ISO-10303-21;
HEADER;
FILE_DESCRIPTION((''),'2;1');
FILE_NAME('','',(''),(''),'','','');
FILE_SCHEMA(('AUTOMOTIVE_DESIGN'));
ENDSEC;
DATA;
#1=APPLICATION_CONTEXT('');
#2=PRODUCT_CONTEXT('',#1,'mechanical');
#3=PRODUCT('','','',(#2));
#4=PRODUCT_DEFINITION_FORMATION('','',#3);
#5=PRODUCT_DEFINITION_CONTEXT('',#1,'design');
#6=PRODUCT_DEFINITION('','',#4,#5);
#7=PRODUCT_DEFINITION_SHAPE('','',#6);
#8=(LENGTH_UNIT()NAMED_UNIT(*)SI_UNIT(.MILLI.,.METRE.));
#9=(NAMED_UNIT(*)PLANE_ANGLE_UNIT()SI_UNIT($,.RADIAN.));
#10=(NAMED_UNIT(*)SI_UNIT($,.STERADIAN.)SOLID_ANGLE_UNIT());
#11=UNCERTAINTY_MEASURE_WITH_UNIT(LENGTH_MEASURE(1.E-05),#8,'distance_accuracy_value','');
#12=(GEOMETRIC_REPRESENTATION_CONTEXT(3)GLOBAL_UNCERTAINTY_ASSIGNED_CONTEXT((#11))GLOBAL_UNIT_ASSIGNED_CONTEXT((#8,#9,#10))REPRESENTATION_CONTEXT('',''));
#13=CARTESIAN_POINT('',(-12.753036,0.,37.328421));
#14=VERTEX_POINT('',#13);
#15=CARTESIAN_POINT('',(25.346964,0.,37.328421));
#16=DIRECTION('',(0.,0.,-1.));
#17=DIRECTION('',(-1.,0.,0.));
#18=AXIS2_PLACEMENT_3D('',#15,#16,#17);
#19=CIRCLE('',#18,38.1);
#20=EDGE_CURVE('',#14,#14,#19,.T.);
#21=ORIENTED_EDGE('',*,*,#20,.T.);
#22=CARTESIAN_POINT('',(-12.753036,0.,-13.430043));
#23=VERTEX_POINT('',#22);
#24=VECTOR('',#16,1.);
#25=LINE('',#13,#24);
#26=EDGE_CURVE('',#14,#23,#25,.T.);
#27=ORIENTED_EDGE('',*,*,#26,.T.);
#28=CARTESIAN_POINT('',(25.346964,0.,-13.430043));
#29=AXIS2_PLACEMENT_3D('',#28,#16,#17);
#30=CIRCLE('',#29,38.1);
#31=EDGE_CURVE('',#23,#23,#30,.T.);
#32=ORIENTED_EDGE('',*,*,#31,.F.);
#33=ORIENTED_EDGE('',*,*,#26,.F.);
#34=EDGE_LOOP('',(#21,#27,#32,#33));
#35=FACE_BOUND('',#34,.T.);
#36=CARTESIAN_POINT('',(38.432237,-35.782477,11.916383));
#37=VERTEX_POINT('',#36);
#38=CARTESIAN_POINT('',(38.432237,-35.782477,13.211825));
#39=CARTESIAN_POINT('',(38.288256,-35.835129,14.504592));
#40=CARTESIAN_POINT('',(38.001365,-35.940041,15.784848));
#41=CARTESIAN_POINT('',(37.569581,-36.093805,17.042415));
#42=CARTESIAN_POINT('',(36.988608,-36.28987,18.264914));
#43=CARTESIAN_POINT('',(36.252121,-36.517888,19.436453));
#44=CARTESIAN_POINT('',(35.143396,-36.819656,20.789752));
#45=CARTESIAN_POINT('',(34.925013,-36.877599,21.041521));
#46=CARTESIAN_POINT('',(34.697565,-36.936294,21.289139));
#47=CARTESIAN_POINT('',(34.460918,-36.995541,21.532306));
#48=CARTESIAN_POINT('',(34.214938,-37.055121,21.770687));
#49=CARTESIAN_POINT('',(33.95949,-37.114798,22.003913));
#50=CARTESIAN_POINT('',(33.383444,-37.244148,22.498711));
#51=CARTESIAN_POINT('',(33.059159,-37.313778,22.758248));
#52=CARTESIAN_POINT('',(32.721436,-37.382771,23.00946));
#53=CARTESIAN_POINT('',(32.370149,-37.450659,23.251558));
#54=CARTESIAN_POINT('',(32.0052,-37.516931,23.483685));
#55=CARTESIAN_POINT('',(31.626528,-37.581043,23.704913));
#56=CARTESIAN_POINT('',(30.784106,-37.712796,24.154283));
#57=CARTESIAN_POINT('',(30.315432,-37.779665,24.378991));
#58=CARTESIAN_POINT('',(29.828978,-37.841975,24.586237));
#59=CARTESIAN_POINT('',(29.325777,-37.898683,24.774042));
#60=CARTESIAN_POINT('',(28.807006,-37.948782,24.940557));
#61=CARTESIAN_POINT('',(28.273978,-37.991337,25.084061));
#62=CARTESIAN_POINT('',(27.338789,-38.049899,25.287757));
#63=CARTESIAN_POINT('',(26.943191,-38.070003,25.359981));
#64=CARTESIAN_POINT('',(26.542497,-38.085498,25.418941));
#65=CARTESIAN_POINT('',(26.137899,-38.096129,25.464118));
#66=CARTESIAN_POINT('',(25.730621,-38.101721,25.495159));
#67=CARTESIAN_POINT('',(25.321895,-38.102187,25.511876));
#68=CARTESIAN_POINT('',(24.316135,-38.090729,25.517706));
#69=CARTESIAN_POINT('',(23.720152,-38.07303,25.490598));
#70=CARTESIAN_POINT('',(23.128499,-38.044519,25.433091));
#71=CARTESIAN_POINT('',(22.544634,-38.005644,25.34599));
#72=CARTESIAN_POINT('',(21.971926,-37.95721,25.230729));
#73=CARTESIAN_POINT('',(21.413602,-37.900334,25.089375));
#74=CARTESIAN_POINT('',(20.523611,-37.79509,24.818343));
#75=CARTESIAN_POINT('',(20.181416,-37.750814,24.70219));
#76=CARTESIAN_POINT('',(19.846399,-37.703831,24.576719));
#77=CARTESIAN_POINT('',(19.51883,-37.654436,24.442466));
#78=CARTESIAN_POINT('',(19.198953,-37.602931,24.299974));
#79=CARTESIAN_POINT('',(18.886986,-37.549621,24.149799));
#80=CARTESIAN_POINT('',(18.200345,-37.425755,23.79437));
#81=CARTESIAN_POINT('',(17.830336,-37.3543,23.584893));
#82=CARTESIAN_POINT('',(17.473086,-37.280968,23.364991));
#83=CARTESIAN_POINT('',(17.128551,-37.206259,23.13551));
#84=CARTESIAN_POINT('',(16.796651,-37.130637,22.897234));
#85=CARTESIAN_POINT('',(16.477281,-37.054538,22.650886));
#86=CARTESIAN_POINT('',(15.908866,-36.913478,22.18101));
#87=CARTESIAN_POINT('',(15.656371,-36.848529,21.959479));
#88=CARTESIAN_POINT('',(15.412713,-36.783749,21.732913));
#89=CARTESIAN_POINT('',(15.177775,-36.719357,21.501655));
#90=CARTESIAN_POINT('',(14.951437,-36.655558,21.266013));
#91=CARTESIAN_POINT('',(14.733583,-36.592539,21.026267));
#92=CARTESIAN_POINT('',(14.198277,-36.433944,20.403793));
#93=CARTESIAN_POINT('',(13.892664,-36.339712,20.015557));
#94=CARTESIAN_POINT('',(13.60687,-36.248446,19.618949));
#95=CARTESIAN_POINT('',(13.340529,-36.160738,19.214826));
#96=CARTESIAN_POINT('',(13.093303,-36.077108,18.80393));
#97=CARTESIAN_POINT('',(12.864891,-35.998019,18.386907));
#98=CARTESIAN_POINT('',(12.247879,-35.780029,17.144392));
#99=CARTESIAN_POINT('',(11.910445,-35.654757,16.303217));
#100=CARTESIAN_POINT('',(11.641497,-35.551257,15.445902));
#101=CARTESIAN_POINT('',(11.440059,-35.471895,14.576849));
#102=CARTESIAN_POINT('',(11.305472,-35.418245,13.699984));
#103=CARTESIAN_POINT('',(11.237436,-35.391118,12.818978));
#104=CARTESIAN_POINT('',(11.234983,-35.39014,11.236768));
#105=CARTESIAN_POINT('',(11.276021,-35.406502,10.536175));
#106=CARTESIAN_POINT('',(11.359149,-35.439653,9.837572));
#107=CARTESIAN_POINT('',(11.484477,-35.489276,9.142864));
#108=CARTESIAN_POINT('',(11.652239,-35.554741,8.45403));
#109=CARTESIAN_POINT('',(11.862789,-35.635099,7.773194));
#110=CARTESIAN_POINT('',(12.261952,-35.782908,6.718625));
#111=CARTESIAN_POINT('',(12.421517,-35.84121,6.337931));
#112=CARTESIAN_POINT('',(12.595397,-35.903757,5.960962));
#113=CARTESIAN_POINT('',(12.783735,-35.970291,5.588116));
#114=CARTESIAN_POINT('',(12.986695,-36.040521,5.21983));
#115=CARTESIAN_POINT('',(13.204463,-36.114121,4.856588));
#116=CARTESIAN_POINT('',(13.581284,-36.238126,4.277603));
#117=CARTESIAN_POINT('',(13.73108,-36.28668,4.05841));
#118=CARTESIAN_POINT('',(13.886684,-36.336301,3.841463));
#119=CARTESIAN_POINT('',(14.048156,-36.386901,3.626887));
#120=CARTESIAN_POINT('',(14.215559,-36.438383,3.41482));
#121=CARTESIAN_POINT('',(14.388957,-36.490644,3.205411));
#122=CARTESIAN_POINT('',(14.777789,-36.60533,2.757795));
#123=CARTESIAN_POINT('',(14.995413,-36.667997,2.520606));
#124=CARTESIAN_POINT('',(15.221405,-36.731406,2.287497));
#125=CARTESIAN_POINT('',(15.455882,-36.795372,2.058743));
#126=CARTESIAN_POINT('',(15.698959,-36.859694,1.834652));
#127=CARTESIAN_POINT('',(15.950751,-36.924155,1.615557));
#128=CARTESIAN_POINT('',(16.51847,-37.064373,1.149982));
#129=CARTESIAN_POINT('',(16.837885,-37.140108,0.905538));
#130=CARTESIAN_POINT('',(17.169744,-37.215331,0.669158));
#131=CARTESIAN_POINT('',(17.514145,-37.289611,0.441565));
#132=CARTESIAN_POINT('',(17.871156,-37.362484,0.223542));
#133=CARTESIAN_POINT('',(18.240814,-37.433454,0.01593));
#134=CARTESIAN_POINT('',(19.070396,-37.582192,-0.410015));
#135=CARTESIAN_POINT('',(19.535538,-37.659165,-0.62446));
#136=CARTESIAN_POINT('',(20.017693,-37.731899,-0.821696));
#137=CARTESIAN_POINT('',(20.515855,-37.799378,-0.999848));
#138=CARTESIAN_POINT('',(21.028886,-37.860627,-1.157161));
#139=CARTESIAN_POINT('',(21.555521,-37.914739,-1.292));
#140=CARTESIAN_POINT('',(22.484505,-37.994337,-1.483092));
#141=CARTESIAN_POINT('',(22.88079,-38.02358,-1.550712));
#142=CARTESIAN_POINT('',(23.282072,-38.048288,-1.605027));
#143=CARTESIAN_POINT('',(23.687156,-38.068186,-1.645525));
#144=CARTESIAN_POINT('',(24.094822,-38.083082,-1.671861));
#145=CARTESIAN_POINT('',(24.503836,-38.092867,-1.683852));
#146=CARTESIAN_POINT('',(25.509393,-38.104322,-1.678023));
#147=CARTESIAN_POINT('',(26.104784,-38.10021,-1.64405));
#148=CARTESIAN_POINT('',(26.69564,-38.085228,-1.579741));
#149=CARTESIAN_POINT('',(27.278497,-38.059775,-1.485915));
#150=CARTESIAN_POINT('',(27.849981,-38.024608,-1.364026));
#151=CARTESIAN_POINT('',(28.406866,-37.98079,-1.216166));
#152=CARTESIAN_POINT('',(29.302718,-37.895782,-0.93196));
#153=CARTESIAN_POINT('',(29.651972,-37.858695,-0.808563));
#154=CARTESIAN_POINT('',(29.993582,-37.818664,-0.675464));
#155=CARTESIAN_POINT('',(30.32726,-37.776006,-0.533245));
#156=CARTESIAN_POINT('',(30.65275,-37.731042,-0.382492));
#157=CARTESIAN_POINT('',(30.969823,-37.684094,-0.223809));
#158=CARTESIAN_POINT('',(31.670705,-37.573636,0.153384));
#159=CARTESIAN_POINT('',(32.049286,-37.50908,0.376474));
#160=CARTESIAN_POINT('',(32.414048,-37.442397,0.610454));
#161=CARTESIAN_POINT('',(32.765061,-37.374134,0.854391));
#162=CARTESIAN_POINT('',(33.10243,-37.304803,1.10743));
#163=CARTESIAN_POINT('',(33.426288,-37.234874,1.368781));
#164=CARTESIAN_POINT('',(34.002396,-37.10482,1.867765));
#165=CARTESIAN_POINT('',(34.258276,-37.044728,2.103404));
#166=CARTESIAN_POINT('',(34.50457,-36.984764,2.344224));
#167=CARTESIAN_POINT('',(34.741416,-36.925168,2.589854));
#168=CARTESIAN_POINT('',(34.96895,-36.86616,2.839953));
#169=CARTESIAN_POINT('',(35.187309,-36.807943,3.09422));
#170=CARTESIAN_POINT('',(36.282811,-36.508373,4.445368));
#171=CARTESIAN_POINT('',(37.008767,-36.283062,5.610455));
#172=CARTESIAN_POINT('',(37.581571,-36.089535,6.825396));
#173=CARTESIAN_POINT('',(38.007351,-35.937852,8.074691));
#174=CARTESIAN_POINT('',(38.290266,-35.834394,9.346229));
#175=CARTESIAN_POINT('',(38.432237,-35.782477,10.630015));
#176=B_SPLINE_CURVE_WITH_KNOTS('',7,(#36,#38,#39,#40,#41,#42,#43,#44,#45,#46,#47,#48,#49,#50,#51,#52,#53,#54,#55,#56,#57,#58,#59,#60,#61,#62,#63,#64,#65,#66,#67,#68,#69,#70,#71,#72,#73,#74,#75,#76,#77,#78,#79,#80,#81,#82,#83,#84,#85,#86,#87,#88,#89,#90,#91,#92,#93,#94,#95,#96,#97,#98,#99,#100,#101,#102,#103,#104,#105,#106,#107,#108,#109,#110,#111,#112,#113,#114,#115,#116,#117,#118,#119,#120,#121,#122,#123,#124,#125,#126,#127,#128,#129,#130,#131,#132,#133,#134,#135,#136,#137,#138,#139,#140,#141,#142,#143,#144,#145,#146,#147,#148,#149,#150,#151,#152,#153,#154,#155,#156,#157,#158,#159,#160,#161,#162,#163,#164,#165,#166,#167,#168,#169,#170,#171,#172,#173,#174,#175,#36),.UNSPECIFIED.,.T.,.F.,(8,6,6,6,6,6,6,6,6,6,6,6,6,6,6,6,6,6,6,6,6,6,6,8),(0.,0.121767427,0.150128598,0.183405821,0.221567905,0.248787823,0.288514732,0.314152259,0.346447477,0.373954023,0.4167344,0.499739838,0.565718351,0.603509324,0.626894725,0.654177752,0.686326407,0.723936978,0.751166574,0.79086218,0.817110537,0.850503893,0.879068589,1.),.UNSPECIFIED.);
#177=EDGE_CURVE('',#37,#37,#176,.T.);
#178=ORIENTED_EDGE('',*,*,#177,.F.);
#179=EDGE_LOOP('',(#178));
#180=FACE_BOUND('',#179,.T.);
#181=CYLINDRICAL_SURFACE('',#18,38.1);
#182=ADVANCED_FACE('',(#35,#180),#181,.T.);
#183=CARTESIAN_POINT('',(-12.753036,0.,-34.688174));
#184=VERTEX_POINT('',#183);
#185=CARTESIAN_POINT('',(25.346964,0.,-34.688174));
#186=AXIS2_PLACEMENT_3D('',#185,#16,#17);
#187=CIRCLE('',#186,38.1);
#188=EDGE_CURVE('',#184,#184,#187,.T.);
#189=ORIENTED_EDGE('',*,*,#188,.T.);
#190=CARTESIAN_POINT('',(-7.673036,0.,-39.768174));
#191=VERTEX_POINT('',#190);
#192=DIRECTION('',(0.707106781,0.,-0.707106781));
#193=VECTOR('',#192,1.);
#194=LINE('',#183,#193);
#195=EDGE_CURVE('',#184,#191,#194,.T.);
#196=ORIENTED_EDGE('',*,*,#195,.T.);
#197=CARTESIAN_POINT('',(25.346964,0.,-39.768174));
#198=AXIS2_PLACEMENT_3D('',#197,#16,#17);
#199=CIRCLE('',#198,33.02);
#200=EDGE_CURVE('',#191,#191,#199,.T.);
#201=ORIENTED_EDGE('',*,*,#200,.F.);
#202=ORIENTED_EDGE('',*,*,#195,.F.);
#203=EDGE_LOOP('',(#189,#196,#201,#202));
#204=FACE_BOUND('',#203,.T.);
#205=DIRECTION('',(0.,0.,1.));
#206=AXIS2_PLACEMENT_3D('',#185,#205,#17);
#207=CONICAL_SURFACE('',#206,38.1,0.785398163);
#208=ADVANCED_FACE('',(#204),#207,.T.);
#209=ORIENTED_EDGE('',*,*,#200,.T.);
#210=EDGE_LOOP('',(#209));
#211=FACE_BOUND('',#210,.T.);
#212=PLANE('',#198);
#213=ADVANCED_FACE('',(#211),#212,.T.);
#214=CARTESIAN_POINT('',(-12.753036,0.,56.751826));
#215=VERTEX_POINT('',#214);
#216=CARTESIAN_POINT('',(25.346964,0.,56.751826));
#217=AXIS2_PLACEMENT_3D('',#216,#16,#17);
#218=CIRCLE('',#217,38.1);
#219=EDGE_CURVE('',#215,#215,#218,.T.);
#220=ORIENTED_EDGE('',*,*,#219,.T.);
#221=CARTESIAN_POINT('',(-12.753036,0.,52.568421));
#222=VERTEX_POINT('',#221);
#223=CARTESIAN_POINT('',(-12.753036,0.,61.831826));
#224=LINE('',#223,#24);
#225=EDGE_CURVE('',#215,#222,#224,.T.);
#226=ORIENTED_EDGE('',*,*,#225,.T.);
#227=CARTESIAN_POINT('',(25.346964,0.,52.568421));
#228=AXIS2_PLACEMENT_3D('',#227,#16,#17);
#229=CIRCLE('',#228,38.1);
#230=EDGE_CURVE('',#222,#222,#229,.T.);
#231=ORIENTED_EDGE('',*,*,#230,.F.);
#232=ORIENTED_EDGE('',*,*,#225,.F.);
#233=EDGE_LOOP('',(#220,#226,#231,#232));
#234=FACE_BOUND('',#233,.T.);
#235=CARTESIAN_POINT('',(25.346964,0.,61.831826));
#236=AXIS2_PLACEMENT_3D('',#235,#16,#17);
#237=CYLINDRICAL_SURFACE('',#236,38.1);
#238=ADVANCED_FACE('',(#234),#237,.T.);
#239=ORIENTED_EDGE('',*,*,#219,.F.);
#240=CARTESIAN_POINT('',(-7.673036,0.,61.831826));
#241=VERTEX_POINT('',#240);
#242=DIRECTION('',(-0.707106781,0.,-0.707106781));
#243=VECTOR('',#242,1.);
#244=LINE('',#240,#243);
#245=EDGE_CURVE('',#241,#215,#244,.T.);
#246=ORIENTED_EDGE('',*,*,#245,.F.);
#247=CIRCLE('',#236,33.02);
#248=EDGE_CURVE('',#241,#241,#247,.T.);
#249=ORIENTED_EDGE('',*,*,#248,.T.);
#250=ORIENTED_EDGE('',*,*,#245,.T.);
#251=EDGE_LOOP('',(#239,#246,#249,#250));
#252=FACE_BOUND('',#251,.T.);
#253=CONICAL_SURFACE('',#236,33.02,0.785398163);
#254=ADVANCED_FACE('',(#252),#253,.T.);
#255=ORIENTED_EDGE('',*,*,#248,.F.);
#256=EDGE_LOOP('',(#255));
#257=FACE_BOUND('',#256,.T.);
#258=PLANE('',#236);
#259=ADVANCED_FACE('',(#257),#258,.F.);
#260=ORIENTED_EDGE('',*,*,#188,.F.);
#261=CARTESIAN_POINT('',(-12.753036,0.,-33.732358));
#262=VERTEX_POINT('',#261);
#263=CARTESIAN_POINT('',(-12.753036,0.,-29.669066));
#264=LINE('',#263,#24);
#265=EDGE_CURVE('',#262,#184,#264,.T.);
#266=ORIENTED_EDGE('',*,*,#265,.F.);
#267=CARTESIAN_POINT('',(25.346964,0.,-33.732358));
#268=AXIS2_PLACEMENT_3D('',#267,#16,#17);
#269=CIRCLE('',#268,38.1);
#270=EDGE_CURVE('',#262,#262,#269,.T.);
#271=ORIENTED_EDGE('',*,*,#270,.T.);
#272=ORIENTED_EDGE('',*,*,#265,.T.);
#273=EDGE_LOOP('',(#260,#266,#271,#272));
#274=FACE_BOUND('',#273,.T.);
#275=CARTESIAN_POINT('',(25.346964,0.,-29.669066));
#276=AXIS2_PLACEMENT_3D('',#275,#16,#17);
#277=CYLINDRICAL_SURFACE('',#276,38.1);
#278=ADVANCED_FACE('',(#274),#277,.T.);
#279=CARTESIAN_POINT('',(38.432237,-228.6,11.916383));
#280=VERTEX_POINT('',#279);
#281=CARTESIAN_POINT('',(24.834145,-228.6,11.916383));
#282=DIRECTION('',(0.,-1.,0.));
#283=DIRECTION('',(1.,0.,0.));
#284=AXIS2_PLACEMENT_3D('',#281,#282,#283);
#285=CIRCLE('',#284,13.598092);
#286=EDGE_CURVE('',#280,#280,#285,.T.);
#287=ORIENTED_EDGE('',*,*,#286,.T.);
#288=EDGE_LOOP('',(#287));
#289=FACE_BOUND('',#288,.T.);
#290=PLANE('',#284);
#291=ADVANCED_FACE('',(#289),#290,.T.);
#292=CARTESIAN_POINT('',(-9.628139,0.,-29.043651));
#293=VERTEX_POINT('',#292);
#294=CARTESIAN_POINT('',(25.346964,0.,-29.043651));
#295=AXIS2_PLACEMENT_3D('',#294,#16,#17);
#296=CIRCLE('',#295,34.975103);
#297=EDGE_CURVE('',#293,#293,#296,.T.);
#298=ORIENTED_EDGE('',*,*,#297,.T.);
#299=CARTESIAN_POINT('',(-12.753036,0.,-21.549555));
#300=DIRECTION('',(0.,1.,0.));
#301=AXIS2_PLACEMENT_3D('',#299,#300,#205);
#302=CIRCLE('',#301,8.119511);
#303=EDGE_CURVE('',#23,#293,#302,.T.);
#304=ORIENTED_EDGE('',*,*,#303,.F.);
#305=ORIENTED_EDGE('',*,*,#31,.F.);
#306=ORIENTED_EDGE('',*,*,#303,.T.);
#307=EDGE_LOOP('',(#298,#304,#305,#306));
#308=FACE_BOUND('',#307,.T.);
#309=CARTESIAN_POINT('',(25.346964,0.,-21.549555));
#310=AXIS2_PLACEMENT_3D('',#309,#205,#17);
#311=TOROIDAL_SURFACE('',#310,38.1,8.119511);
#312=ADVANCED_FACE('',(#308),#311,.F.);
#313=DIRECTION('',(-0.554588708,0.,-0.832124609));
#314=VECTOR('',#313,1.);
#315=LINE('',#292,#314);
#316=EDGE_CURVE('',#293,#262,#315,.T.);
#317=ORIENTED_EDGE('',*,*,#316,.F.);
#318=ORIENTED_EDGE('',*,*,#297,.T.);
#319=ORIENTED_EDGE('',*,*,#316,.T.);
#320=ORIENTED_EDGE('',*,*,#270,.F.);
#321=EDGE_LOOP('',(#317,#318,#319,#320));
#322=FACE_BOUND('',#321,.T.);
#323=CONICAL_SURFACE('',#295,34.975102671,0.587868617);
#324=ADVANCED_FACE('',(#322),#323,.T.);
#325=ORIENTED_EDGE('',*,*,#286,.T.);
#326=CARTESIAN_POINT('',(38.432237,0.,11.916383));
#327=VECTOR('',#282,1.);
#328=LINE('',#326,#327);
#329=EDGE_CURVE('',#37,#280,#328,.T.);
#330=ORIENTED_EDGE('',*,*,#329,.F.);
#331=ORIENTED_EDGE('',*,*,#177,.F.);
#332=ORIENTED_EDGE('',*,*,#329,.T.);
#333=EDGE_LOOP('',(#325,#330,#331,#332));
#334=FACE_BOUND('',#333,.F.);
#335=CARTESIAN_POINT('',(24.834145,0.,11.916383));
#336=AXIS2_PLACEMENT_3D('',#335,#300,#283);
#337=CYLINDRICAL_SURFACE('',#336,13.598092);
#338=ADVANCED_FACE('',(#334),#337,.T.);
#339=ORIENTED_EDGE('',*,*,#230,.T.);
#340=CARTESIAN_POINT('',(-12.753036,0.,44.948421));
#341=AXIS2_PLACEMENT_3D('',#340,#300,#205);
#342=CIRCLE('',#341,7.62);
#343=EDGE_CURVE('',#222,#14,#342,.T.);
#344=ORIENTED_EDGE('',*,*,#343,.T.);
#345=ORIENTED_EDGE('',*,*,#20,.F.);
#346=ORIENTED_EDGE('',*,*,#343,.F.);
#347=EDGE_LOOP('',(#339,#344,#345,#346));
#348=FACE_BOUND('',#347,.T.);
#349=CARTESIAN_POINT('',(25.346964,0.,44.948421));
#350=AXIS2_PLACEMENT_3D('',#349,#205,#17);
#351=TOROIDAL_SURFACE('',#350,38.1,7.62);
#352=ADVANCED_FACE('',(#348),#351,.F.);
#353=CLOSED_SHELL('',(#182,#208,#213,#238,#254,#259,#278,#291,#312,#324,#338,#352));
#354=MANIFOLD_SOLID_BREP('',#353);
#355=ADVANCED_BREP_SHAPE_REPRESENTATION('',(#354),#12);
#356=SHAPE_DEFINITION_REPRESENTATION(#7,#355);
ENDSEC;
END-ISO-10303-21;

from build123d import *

# Parameters (mm, degrees)
F2_R     = 13.5980918735
F3_DEPTH = 228.6


# Not quite as in the source:
# - a fillet or chamfer that OpenCascade refuses, or shapes differently, is made with other operations: its cross-section is extruded or revolved along the edge and cut away or added


with BuildPart() as f1:
    # F0 (on Front) → F1 (revolve)
    with BuildSketch(Plane.XZ):
        with BuildLine():
            Line((25.3469641268, 61.8318257093), (-12.7530358732, 61.8318257093))
            Line((-12.7530358732, 61.8318257093), (-12.7530358732, 52.5684214187))
            ThreePointArc((-12.7530358732, 52.5684214187), (-5.1330358732, 44.9484214187), (-12.7530358732, 37.3284214187))
            Line((-12.7530358732, 37.3284214187), (-12.7530358732, -13.4300431368))
            ThreePointArc((-12.7530358732, -13.4300431368), (-4.6335244682, -21.5495545417), (-12.7530358732, -29.6690659466))
            Line((-12.7530358732, -29.6690659466), (-12.7530358732, -39.7681742907))
            Line((-12.7530358732, -39.7681742907), (25.3469641268, -39.7681742907))
            Line((25.3469641268, -39.7681742907), (25.3469641268, 61.8318257093))
        make_face()
    revolve(axis=Axis((25.3469641268, 0, 11.0318257093), (0, 0, -1)))

    # F2 (on Front) → F3 (join)
    with BuildSketch(Plane.XZ):
        with Locations((24.8341448605, 11.9163831696)):
            Circle(F2_R)
    extrude(amount=F3_DEPTH)

    # F4: chamfer of 5.08 on 4 edges, made by hand

    # F4_s1 → F4_t2 (revolve, cut)
    with BuildSketch(Plane.XZ):
        Polygon((-7.6730358732, 61.8318257093), (-12.7530358732, 56.7518257093), (-12.7530358732, 61.8318257093), align=None)
    revolve(axis=Axis((25.3469641268, 0, 61.8318257093), (0, 0, -1)), mode=Mode.SUBTRACT)

    # F4_s3 → F4_t4 (revolve, cut)
    with BuildSketch(Plane.XZ):
        with BuildLine():
            Line((-9.6281385439, -29.0436510274), (-12.7530358732, -33.7323580503))
            Line((-12.7530358732, -33.7323580503), (-12.7530358732, -29.6690659466))
            ThreePointArc((-12.7530358732, -29.6690659466), (-11.0871747515, -29.4963383048), (-9.6281385439, -29.0436510274))
        make_face()
    revolve(axis=Axis((25.3469641268, 0, -29.6690659466), (0, 0, -1)), mode=Mode.SUBTRACT)

    # F4_s5 → F4_t6 (revolve, cut)
    with BuildSketch(Plane.XZ):
        Polygon((-12.7530358732, -34.6881742907), (-7.6730358732, -39.7681742907), (-12.7530358732, -39.7681742907), align=None)
    revolve(axis=Axis((25.3469641268, 0, -39.7681742907), (0, 0, -1)), mode=Mode.SUBTRACT)


solid = f1.part
